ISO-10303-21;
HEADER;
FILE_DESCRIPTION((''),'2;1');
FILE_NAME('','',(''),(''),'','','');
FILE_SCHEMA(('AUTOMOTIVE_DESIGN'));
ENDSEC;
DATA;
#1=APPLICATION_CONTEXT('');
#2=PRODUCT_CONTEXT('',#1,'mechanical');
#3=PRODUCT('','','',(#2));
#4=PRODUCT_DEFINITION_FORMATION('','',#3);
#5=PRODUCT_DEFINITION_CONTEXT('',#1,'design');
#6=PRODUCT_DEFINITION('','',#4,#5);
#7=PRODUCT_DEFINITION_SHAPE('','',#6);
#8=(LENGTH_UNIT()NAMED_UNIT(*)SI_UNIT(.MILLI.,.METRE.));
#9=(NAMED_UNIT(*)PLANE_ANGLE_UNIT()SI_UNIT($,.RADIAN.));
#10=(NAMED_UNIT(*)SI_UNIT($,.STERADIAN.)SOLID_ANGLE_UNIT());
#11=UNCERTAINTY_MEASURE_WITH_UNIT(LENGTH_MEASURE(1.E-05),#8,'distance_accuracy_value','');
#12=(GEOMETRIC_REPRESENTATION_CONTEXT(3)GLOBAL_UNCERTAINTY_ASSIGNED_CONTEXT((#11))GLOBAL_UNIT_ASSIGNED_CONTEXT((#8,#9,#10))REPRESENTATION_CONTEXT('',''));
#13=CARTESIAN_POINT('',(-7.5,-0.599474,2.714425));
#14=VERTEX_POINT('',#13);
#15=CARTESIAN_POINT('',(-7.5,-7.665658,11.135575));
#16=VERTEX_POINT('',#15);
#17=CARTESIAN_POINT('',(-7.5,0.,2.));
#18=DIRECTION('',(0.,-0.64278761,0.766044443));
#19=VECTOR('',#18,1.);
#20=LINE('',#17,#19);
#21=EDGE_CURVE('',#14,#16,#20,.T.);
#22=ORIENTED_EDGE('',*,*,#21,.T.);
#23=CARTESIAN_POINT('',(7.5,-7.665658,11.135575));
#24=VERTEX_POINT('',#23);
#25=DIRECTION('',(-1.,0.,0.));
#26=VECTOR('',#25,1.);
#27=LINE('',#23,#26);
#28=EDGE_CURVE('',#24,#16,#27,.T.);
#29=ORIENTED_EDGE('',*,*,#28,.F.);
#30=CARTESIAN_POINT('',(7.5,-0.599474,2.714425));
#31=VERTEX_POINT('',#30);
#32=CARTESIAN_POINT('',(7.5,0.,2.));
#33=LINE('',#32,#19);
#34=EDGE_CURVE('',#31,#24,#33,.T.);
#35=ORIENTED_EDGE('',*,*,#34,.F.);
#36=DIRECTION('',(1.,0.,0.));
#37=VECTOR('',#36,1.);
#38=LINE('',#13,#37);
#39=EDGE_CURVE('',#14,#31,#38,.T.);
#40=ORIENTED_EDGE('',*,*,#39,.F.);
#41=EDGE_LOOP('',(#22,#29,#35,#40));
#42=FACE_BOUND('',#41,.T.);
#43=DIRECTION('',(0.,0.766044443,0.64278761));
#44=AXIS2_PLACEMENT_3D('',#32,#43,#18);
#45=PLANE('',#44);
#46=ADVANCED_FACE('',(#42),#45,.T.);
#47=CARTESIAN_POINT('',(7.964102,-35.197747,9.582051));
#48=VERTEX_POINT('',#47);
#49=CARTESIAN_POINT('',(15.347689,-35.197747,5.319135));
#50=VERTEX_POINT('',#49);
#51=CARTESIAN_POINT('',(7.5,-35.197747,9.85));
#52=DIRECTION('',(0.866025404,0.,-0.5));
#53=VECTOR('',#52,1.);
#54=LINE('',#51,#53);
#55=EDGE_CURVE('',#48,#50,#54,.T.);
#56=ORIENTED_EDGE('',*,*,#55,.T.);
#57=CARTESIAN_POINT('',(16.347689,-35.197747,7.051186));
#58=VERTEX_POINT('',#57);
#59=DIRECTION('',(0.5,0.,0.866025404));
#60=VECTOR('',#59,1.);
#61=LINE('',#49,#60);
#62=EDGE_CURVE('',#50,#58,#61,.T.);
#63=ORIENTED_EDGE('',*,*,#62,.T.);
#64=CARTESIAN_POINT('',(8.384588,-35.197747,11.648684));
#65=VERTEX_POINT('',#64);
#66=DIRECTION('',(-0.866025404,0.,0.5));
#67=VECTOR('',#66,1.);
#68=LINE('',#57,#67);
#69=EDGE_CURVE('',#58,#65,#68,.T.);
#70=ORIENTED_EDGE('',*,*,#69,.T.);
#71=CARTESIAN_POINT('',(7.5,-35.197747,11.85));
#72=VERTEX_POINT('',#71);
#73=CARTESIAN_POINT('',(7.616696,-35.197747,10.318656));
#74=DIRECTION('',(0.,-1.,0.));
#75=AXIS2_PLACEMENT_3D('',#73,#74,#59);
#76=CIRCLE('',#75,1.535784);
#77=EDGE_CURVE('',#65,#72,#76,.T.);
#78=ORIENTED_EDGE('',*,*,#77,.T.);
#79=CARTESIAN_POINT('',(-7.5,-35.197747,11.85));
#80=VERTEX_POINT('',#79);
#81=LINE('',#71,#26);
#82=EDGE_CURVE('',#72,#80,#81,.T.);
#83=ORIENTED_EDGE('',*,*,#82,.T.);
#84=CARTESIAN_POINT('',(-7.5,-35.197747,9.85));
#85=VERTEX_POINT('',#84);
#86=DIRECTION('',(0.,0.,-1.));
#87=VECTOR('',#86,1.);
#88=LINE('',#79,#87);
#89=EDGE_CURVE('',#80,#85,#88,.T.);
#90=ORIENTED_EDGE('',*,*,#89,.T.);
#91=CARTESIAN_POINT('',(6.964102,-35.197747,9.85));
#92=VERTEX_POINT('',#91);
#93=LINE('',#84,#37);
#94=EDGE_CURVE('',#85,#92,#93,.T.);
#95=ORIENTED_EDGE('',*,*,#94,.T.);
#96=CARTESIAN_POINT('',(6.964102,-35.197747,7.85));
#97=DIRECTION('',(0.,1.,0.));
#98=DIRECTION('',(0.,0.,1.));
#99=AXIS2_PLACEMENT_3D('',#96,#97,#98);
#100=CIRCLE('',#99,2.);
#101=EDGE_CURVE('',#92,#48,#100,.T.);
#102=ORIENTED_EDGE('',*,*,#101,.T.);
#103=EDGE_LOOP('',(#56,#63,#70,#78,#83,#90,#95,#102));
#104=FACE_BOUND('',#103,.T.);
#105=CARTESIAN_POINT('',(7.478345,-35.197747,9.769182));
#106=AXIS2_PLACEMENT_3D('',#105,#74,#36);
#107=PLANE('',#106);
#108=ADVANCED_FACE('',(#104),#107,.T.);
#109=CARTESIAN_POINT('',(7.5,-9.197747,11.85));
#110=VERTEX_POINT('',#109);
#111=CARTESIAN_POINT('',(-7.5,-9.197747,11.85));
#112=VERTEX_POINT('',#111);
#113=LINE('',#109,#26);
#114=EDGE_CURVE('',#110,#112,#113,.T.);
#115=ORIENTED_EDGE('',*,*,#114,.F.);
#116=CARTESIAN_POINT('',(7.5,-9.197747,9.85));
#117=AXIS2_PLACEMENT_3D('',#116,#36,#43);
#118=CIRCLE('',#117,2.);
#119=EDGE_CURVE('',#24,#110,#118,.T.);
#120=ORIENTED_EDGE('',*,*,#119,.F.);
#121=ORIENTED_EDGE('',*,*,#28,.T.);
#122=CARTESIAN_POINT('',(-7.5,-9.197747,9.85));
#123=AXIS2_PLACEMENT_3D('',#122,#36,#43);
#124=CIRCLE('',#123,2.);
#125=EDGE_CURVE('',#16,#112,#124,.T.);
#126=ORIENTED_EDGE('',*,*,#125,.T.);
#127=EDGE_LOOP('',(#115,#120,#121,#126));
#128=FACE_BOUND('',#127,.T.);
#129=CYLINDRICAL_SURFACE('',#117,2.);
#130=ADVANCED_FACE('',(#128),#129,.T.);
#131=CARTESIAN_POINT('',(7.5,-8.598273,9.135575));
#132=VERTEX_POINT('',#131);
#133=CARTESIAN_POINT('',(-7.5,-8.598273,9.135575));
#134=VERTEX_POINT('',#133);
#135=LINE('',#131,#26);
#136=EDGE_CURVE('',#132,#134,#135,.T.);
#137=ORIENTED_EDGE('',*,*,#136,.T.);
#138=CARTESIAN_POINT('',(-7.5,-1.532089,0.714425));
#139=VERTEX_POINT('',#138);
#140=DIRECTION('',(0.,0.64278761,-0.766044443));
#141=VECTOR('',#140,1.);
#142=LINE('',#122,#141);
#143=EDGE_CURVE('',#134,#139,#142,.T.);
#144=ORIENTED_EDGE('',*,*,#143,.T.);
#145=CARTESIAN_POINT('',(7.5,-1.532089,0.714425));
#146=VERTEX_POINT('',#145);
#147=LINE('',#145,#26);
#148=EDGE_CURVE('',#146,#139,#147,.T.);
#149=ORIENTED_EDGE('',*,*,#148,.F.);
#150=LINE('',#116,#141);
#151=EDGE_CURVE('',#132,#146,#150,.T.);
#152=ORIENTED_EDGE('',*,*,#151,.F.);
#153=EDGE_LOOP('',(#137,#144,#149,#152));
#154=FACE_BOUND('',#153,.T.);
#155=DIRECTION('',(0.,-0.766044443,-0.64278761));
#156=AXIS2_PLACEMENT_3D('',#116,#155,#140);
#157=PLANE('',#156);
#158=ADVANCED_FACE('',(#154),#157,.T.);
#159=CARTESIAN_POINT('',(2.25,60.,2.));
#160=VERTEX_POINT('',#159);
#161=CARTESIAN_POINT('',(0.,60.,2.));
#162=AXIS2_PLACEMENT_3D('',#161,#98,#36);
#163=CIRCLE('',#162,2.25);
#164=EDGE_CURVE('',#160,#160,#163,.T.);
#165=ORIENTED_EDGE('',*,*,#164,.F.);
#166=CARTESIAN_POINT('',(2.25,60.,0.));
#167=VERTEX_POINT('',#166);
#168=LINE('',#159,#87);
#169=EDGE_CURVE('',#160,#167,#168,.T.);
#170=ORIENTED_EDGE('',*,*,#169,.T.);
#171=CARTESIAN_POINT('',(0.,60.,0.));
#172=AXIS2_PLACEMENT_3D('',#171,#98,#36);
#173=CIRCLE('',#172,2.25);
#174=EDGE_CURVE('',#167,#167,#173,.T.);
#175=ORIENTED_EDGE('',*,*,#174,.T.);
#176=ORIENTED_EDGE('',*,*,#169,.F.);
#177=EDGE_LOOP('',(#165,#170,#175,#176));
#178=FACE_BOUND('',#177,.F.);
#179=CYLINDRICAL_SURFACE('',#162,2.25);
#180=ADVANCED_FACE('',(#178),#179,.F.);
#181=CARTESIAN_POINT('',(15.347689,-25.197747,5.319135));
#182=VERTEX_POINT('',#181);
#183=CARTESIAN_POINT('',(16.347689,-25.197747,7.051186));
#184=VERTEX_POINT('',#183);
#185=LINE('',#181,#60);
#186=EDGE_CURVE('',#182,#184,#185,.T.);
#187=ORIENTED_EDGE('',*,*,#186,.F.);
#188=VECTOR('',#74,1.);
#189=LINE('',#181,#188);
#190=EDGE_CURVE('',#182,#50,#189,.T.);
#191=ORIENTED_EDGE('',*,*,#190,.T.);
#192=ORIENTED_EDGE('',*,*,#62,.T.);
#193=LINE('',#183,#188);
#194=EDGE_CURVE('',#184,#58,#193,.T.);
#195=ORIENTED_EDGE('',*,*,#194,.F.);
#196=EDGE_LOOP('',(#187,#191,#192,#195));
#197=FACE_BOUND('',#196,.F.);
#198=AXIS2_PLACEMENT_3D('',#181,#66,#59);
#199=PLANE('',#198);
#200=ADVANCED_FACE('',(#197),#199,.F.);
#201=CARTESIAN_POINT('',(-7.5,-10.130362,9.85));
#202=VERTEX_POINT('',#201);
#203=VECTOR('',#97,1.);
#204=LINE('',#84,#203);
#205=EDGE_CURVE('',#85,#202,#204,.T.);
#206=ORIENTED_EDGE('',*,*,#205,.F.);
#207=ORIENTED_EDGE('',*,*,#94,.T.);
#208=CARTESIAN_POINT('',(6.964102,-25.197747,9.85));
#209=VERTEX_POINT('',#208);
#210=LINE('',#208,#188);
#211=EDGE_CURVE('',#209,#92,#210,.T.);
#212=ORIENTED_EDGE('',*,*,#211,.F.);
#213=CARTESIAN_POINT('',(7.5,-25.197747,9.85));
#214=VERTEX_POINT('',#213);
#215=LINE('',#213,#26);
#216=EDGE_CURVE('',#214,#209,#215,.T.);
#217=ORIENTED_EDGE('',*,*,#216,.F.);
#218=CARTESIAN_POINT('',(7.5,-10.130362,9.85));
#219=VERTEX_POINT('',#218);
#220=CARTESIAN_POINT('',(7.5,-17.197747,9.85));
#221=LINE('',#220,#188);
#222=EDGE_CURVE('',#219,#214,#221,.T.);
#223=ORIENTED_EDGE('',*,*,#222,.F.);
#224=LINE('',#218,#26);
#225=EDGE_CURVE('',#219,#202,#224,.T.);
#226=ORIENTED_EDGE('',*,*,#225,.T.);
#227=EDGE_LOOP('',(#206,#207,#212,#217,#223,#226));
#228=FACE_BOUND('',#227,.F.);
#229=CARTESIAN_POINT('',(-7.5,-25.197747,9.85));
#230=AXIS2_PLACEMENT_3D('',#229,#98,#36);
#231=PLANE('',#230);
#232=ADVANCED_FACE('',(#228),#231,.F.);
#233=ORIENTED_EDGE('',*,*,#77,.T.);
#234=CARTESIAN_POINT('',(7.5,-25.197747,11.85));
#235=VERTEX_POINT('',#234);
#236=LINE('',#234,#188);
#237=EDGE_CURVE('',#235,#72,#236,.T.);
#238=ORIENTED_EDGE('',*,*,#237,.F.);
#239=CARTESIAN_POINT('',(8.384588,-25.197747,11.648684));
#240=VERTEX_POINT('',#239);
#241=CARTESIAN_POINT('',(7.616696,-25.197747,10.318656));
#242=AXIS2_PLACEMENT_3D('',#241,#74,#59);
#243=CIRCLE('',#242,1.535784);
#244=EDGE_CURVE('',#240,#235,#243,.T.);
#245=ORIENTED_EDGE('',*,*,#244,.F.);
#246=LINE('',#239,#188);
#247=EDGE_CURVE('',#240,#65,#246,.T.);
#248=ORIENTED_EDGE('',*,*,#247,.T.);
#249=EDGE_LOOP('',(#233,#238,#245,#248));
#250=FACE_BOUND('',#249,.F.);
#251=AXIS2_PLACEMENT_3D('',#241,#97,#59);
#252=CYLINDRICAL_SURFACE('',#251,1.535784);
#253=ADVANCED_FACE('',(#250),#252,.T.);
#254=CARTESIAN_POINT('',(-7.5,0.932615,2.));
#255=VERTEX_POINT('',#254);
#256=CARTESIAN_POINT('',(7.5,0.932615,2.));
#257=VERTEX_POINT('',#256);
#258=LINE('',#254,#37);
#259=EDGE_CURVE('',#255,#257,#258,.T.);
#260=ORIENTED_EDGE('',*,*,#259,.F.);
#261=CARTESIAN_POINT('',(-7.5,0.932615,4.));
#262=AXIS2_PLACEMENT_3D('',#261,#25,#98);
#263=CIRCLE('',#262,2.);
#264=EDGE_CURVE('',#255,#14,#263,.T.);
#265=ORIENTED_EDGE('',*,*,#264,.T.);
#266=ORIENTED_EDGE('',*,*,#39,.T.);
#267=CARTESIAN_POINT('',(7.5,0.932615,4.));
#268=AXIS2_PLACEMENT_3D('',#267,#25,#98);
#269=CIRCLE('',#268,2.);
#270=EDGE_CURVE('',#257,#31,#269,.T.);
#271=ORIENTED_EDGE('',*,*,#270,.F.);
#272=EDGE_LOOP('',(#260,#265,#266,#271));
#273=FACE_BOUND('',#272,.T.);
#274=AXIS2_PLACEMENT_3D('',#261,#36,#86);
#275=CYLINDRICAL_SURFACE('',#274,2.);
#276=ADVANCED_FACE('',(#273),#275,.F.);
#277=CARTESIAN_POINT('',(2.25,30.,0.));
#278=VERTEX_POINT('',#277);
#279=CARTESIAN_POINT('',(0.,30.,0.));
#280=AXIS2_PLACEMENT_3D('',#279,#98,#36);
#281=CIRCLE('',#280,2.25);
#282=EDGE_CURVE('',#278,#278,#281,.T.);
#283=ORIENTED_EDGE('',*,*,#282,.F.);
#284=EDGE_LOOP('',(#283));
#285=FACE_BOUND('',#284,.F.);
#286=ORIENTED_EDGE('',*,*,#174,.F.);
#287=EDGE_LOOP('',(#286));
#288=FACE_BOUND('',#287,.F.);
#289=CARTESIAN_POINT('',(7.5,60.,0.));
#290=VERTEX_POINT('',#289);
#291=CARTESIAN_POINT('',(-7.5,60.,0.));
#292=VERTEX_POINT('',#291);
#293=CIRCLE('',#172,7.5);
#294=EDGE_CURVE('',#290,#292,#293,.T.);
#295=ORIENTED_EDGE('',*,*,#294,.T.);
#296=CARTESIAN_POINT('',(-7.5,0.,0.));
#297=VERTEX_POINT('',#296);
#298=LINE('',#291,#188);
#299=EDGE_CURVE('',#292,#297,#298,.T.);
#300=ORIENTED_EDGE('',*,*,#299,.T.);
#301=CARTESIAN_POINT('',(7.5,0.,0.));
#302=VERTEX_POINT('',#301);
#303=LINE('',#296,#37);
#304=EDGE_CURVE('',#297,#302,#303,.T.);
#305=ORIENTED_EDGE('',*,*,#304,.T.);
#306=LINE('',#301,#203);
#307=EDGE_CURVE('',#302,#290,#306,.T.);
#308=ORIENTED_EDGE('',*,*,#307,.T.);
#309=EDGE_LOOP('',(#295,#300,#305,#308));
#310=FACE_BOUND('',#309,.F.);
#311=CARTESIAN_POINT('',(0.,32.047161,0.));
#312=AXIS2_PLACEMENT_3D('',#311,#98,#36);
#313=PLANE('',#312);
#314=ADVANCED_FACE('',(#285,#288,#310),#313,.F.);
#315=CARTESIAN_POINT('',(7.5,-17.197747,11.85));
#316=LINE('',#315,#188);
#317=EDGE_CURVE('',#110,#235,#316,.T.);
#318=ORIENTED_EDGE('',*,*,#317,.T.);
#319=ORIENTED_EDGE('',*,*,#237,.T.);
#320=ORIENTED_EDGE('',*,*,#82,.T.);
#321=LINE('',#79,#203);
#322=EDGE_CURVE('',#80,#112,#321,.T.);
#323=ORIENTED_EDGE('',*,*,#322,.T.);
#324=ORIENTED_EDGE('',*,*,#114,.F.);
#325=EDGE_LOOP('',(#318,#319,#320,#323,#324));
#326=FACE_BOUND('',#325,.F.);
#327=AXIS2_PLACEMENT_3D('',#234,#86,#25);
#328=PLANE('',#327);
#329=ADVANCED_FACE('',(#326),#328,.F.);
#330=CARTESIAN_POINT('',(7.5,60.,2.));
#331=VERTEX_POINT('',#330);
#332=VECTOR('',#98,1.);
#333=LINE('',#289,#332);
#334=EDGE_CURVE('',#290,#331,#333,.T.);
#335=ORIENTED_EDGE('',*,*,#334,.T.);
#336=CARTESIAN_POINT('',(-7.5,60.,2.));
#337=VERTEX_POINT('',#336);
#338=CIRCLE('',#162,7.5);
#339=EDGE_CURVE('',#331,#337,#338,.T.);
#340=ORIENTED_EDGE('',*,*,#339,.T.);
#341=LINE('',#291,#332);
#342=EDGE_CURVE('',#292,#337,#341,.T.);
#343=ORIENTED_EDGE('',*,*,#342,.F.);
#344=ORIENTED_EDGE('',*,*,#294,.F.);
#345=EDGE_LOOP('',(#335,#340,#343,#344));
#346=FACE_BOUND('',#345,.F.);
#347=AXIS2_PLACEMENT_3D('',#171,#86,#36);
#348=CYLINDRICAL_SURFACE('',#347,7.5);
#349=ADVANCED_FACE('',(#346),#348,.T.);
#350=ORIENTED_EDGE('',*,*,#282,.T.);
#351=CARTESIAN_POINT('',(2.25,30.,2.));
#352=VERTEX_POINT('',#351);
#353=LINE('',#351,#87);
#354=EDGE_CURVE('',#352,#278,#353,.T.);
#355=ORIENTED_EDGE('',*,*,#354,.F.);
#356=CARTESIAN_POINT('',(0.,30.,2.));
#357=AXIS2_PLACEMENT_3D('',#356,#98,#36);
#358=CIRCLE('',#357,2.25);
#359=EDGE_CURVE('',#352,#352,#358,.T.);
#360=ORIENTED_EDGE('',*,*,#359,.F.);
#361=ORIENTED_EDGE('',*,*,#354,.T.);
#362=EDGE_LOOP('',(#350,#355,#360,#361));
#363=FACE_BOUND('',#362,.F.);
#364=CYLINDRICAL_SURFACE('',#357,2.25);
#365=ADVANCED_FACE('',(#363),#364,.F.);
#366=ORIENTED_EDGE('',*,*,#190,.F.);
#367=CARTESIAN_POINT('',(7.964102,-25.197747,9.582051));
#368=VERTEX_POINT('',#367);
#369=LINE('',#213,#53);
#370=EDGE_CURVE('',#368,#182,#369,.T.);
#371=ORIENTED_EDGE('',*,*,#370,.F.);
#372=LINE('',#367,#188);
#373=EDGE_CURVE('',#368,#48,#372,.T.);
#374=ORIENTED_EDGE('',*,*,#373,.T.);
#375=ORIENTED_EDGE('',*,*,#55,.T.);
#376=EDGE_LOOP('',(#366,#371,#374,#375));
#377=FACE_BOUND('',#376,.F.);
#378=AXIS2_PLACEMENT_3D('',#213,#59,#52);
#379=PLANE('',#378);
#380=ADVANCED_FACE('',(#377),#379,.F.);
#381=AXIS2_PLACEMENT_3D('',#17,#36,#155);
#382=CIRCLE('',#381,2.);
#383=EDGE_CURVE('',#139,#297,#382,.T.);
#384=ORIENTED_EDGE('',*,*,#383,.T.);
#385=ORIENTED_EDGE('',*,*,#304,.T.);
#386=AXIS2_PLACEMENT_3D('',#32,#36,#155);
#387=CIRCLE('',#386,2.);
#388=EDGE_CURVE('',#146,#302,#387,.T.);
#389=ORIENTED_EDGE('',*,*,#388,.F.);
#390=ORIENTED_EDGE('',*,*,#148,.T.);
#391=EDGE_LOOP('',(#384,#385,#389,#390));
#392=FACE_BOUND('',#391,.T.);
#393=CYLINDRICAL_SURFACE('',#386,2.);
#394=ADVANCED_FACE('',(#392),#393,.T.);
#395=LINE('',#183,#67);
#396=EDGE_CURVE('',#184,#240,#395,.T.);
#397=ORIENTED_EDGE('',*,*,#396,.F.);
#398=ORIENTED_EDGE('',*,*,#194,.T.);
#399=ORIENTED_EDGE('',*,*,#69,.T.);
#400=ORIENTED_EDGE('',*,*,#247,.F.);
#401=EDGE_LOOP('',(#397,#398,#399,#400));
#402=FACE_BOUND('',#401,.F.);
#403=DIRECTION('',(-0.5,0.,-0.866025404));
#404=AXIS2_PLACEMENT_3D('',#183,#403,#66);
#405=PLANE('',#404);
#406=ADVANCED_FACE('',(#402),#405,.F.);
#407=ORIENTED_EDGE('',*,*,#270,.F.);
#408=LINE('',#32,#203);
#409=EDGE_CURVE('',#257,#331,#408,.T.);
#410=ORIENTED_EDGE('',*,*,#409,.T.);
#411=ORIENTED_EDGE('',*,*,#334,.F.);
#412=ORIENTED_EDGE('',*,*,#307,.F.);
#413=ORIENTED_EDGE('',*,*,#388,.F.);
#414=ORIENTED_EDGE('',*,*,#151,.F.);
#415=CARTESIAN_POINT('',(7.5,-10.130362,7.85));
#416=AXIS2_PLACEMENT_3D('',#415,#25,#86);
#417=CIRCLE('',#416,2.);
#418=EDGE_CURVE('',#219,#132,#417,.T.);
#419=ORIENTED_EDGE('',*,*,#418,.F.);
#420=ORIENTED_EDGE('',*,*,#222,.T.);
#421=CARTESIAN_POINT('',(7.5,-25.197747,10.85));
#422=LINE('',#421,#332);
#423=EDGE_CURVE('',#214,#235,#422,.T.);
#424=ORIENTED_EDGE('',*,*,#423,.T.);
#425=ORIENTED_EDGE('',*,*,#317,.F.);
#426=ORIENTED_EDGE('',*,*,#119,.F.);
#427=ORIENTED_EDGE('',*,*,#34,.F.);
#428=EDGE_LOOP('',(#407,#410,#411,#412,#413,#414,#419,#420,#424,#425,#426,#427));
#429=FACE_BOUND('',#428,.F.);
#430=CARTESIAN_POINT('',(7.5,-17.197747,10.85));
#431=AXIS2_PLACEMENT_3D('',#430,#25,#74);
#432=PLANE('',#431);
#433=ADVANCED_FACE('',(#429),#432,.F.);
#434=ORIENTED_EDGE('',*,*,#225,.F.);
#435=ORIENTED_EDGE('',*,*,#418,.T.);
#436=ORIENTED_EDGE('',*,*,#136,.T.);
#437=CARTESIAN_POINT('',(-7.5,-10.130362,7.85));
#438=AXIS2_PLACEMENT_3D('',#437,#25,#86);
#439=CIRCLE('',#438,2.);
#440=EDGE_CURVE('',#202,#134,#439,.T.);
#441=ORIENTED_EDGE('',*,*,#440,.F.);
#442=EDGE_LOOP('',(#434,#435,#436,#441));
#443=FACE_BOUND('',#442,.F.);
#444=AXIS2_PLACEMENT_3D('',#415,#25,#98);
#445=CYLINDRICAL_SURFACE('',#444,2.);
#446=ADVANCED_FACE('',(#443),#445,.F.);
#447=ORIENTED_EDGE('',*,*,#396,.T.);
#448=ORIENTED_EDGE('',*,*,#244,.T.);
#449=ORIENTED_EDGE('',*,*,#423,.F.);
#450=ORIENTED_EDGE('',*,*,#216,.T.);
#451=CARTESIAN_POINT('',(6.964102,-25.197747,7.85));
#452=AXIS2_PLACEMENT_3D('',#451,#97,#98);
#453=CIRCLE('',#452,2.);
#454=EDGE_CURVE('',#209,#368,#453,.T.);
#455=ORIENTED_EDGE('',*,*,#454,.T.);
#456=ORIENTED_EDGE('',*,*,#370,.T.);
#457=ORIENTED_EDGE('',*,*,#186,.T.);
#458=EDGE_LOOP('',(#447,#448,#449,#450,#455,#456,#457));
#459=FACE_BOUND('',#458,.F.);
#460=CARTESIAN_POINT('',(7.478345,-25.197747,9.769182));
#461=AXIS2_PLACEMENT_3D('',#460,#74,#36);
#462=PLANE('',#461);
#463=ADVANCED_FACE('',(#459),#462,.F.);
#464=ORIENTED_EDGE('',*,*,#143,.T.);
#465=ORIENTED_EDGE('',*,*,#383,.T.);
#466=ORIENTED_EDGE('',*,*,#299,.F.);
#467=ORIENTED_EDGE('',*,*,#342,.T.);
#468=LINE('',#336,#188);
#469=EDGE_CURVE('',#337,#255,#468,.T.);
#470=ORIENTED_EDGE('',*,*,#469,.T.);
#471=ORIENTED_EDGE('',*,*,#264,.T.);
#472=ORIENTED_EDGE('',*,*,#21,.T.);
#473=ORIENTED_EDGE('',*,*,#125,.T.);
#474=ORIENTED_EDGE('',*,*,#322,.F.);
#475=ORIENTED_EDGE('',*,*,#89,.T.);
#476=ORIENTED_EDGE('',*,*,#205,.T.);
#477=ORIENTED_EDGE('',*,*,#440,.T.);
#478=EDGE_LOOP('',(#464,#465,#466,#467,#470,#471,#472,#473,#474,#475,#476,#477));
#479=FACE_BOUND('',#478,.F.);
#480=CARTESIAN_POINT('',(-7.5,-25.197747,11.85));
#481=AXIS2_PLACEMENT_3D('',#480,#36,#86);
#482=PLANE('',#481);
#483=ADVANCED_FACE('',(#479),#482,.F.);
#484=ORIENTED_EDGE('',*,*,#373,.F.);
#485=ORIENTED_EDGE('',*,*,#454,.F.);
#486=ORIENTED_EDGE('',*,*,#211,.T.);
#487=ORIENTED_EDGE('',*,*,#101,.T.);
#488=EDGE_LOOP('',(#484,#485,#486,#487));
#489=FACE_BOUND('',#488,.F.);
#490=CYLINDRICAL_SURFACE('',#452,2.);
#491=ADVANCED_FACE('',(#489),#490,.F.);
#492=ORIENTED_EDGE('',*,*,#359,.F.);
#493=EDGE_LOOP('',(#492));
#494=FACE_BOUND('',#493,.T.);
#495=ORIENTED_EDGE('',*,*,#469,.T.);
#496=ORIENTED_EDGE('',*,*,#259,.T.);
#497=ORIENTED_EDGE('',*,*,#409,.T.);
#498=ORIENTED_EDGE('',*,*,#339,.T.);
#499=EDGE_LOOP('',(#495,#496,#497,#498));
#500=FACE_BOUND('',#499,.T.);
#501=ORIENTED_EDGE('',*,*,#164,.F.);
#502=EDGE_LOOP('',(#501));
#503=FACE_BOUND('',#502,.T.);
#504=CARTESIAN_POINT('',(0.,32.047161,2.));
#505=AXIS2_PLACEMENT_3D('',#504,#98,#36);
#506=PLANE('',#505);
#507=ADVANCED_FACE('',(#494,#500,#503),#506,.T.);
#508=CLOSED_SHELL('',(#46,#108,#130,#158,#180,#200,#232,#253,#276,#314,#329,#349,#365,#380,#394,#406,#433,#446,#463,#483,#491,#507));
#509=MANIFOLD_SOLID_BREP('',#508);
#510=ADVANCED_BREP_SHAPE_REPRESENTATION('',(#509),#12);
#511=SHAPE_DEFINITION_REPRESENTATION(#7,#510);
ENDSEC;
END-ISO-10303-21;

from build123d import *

# Parameters (mm, degrees)
F1_DEPTH     = 2
F3_DEPTH     = 15
F4_W         = 15
F4_H         = 36.1711822092
F5_DEPTH     = 2
F6_W         = 16
F6_H         = 2
F7_DEPTH     = 15
F8_R         = 2
F11_DEPTH    = 10
F12_R        = 2.25
F13_DEPTH    = 25
F14_T1_DEPTH = 10


# Not quite as in the source:
# - a fillet or chamfer that OpenCascade refuses, or shapes differently, is made with other operations: its cross-section is extruded or revolved along the edge and cut away or added


with BuildPart() as f1:
    # F0 (on Top) → F1 (new body)
    with BuildSketch(Plane.XY):
        with BuildLine():
            Line((-7.5, 60), (-7.5, 0))
            Line((-7.5, 0), (7.5, 0))
            Line((7.5, 0), (7.5, 60))
            ThreePointArc((7.5, 60), (0, 67.5), (-7.5, 60))
        make_face()
    extrude(amount=F1_DEPTH)

    # F2 (on face) → F3 (join, through all)
    with BuildSketch(Plane.YZ.offset(7.5)):
        with BuildLine():
            Line((-9.1977466834, 9.85), (-1.5320888862, 0.7144247806))
            ThreePointArc((-1.5320888862, 0.7144247806), (-0.8452365235, 0.1873844259), (0, 0))
            Line((0, 0), (0, 2))
            Line((0, 2), (-7.6656577972, 11.1355752194))
            ThreePointArc((-7.6656577972, 11.1355752194), (-8.3525101599, 11.6626155741), (-9.1977466834, 11.85))
            Line((-9.1977466834, 11.85), (-9.1977466834, 9.85))
        make_face()
    extrude(amount=-F3_DEPTH)

    # F6 (on face) → F7 (join, through all)
    with BuildSketch(Plane(origin=(-7.5, 0, 0), x_dir=(0, -1, 0), z_dir=(-1, 0, 0))):
        with Locations((17.1977466834, 10.85)):
            Rectangle(F6_W, F6_H)
    extrude(amount=-F7_DEPTH)

    # F8
    f8_edges = [f1.edges().sort_by_distance(p)[0] for p in [
        (0, 0, 0),
        (0, 0, 2),
        (0, -9.197747, 11.85),
        (0, -9.197747, 9.85),
    ]]
    fillet(f8_edges, radius=F8_R)

    # F10 (on face) → F11 (join)
    with BuildSketch(Plane.XZ.offset(25.1977466834)):
        with BuildLine():
            Line((-7.5, 9.85), (7.5, 9.85))
            Line((7.5, 9.85), (15.3476885433, 5.319134907))
            Line((15.3476885433, 5.319134907), (16.3476885433, 7.0511857146))
            Line((16.3476885433, 7.0511857146), (8.384588029, 11.6486839401))
            ThreePointArc((8.384588029, 11.6486839401), (7.9574981533, 11.8161493535), (7.5, 11.85))
            Line((7.5, 11.85), (-7.5, 11.85))
            Line((-7.5, 11.85), (-7.5, 9.85))
        make_face()
    extrude(amount=F11_DEPTH)

    # F12 (on face) → F13 (cut)
    with BuildSketch(Plane.XY.offset(2)):
        with Locations((0, 60)):
            Circle(F12_R)
        with Locations((0, 30)):
            Circle(F12_R)
    extrude(amount=-F13_DEPTH, mode=Mode.SUBTRACT)

    # F14: fillet of radius 2 on 1 edges, made by hand

    # F14_s2 → F14_t1 (join)
    with BuildSketch(Plane.XZ.offset(25.1977466834)):
        with BuildLine():
            ThreePointArc((6.9641016151, 9.85), (7.4817397053, 9.7818516526), (7.9641016151, 9.5820508076))
            Line((7.9641016151, 9.5820508076), (7.5, 9.85))
            Line((7.5, 9.85), (6.9641016151, 9.85))
        make_face()
    extrude(amount=F14_T1_DEPTH)


with BuildPart() as f5:
    # F4 (on face) → F5 (new body)
    with BuildSketch(Plane.XY.offset(2)):
        with Locations((0, -25.7512489018)):
            Rectangle(F4_W, F4_H)
    extrude(amount=F5_DEPTH)


solid = f1.part
